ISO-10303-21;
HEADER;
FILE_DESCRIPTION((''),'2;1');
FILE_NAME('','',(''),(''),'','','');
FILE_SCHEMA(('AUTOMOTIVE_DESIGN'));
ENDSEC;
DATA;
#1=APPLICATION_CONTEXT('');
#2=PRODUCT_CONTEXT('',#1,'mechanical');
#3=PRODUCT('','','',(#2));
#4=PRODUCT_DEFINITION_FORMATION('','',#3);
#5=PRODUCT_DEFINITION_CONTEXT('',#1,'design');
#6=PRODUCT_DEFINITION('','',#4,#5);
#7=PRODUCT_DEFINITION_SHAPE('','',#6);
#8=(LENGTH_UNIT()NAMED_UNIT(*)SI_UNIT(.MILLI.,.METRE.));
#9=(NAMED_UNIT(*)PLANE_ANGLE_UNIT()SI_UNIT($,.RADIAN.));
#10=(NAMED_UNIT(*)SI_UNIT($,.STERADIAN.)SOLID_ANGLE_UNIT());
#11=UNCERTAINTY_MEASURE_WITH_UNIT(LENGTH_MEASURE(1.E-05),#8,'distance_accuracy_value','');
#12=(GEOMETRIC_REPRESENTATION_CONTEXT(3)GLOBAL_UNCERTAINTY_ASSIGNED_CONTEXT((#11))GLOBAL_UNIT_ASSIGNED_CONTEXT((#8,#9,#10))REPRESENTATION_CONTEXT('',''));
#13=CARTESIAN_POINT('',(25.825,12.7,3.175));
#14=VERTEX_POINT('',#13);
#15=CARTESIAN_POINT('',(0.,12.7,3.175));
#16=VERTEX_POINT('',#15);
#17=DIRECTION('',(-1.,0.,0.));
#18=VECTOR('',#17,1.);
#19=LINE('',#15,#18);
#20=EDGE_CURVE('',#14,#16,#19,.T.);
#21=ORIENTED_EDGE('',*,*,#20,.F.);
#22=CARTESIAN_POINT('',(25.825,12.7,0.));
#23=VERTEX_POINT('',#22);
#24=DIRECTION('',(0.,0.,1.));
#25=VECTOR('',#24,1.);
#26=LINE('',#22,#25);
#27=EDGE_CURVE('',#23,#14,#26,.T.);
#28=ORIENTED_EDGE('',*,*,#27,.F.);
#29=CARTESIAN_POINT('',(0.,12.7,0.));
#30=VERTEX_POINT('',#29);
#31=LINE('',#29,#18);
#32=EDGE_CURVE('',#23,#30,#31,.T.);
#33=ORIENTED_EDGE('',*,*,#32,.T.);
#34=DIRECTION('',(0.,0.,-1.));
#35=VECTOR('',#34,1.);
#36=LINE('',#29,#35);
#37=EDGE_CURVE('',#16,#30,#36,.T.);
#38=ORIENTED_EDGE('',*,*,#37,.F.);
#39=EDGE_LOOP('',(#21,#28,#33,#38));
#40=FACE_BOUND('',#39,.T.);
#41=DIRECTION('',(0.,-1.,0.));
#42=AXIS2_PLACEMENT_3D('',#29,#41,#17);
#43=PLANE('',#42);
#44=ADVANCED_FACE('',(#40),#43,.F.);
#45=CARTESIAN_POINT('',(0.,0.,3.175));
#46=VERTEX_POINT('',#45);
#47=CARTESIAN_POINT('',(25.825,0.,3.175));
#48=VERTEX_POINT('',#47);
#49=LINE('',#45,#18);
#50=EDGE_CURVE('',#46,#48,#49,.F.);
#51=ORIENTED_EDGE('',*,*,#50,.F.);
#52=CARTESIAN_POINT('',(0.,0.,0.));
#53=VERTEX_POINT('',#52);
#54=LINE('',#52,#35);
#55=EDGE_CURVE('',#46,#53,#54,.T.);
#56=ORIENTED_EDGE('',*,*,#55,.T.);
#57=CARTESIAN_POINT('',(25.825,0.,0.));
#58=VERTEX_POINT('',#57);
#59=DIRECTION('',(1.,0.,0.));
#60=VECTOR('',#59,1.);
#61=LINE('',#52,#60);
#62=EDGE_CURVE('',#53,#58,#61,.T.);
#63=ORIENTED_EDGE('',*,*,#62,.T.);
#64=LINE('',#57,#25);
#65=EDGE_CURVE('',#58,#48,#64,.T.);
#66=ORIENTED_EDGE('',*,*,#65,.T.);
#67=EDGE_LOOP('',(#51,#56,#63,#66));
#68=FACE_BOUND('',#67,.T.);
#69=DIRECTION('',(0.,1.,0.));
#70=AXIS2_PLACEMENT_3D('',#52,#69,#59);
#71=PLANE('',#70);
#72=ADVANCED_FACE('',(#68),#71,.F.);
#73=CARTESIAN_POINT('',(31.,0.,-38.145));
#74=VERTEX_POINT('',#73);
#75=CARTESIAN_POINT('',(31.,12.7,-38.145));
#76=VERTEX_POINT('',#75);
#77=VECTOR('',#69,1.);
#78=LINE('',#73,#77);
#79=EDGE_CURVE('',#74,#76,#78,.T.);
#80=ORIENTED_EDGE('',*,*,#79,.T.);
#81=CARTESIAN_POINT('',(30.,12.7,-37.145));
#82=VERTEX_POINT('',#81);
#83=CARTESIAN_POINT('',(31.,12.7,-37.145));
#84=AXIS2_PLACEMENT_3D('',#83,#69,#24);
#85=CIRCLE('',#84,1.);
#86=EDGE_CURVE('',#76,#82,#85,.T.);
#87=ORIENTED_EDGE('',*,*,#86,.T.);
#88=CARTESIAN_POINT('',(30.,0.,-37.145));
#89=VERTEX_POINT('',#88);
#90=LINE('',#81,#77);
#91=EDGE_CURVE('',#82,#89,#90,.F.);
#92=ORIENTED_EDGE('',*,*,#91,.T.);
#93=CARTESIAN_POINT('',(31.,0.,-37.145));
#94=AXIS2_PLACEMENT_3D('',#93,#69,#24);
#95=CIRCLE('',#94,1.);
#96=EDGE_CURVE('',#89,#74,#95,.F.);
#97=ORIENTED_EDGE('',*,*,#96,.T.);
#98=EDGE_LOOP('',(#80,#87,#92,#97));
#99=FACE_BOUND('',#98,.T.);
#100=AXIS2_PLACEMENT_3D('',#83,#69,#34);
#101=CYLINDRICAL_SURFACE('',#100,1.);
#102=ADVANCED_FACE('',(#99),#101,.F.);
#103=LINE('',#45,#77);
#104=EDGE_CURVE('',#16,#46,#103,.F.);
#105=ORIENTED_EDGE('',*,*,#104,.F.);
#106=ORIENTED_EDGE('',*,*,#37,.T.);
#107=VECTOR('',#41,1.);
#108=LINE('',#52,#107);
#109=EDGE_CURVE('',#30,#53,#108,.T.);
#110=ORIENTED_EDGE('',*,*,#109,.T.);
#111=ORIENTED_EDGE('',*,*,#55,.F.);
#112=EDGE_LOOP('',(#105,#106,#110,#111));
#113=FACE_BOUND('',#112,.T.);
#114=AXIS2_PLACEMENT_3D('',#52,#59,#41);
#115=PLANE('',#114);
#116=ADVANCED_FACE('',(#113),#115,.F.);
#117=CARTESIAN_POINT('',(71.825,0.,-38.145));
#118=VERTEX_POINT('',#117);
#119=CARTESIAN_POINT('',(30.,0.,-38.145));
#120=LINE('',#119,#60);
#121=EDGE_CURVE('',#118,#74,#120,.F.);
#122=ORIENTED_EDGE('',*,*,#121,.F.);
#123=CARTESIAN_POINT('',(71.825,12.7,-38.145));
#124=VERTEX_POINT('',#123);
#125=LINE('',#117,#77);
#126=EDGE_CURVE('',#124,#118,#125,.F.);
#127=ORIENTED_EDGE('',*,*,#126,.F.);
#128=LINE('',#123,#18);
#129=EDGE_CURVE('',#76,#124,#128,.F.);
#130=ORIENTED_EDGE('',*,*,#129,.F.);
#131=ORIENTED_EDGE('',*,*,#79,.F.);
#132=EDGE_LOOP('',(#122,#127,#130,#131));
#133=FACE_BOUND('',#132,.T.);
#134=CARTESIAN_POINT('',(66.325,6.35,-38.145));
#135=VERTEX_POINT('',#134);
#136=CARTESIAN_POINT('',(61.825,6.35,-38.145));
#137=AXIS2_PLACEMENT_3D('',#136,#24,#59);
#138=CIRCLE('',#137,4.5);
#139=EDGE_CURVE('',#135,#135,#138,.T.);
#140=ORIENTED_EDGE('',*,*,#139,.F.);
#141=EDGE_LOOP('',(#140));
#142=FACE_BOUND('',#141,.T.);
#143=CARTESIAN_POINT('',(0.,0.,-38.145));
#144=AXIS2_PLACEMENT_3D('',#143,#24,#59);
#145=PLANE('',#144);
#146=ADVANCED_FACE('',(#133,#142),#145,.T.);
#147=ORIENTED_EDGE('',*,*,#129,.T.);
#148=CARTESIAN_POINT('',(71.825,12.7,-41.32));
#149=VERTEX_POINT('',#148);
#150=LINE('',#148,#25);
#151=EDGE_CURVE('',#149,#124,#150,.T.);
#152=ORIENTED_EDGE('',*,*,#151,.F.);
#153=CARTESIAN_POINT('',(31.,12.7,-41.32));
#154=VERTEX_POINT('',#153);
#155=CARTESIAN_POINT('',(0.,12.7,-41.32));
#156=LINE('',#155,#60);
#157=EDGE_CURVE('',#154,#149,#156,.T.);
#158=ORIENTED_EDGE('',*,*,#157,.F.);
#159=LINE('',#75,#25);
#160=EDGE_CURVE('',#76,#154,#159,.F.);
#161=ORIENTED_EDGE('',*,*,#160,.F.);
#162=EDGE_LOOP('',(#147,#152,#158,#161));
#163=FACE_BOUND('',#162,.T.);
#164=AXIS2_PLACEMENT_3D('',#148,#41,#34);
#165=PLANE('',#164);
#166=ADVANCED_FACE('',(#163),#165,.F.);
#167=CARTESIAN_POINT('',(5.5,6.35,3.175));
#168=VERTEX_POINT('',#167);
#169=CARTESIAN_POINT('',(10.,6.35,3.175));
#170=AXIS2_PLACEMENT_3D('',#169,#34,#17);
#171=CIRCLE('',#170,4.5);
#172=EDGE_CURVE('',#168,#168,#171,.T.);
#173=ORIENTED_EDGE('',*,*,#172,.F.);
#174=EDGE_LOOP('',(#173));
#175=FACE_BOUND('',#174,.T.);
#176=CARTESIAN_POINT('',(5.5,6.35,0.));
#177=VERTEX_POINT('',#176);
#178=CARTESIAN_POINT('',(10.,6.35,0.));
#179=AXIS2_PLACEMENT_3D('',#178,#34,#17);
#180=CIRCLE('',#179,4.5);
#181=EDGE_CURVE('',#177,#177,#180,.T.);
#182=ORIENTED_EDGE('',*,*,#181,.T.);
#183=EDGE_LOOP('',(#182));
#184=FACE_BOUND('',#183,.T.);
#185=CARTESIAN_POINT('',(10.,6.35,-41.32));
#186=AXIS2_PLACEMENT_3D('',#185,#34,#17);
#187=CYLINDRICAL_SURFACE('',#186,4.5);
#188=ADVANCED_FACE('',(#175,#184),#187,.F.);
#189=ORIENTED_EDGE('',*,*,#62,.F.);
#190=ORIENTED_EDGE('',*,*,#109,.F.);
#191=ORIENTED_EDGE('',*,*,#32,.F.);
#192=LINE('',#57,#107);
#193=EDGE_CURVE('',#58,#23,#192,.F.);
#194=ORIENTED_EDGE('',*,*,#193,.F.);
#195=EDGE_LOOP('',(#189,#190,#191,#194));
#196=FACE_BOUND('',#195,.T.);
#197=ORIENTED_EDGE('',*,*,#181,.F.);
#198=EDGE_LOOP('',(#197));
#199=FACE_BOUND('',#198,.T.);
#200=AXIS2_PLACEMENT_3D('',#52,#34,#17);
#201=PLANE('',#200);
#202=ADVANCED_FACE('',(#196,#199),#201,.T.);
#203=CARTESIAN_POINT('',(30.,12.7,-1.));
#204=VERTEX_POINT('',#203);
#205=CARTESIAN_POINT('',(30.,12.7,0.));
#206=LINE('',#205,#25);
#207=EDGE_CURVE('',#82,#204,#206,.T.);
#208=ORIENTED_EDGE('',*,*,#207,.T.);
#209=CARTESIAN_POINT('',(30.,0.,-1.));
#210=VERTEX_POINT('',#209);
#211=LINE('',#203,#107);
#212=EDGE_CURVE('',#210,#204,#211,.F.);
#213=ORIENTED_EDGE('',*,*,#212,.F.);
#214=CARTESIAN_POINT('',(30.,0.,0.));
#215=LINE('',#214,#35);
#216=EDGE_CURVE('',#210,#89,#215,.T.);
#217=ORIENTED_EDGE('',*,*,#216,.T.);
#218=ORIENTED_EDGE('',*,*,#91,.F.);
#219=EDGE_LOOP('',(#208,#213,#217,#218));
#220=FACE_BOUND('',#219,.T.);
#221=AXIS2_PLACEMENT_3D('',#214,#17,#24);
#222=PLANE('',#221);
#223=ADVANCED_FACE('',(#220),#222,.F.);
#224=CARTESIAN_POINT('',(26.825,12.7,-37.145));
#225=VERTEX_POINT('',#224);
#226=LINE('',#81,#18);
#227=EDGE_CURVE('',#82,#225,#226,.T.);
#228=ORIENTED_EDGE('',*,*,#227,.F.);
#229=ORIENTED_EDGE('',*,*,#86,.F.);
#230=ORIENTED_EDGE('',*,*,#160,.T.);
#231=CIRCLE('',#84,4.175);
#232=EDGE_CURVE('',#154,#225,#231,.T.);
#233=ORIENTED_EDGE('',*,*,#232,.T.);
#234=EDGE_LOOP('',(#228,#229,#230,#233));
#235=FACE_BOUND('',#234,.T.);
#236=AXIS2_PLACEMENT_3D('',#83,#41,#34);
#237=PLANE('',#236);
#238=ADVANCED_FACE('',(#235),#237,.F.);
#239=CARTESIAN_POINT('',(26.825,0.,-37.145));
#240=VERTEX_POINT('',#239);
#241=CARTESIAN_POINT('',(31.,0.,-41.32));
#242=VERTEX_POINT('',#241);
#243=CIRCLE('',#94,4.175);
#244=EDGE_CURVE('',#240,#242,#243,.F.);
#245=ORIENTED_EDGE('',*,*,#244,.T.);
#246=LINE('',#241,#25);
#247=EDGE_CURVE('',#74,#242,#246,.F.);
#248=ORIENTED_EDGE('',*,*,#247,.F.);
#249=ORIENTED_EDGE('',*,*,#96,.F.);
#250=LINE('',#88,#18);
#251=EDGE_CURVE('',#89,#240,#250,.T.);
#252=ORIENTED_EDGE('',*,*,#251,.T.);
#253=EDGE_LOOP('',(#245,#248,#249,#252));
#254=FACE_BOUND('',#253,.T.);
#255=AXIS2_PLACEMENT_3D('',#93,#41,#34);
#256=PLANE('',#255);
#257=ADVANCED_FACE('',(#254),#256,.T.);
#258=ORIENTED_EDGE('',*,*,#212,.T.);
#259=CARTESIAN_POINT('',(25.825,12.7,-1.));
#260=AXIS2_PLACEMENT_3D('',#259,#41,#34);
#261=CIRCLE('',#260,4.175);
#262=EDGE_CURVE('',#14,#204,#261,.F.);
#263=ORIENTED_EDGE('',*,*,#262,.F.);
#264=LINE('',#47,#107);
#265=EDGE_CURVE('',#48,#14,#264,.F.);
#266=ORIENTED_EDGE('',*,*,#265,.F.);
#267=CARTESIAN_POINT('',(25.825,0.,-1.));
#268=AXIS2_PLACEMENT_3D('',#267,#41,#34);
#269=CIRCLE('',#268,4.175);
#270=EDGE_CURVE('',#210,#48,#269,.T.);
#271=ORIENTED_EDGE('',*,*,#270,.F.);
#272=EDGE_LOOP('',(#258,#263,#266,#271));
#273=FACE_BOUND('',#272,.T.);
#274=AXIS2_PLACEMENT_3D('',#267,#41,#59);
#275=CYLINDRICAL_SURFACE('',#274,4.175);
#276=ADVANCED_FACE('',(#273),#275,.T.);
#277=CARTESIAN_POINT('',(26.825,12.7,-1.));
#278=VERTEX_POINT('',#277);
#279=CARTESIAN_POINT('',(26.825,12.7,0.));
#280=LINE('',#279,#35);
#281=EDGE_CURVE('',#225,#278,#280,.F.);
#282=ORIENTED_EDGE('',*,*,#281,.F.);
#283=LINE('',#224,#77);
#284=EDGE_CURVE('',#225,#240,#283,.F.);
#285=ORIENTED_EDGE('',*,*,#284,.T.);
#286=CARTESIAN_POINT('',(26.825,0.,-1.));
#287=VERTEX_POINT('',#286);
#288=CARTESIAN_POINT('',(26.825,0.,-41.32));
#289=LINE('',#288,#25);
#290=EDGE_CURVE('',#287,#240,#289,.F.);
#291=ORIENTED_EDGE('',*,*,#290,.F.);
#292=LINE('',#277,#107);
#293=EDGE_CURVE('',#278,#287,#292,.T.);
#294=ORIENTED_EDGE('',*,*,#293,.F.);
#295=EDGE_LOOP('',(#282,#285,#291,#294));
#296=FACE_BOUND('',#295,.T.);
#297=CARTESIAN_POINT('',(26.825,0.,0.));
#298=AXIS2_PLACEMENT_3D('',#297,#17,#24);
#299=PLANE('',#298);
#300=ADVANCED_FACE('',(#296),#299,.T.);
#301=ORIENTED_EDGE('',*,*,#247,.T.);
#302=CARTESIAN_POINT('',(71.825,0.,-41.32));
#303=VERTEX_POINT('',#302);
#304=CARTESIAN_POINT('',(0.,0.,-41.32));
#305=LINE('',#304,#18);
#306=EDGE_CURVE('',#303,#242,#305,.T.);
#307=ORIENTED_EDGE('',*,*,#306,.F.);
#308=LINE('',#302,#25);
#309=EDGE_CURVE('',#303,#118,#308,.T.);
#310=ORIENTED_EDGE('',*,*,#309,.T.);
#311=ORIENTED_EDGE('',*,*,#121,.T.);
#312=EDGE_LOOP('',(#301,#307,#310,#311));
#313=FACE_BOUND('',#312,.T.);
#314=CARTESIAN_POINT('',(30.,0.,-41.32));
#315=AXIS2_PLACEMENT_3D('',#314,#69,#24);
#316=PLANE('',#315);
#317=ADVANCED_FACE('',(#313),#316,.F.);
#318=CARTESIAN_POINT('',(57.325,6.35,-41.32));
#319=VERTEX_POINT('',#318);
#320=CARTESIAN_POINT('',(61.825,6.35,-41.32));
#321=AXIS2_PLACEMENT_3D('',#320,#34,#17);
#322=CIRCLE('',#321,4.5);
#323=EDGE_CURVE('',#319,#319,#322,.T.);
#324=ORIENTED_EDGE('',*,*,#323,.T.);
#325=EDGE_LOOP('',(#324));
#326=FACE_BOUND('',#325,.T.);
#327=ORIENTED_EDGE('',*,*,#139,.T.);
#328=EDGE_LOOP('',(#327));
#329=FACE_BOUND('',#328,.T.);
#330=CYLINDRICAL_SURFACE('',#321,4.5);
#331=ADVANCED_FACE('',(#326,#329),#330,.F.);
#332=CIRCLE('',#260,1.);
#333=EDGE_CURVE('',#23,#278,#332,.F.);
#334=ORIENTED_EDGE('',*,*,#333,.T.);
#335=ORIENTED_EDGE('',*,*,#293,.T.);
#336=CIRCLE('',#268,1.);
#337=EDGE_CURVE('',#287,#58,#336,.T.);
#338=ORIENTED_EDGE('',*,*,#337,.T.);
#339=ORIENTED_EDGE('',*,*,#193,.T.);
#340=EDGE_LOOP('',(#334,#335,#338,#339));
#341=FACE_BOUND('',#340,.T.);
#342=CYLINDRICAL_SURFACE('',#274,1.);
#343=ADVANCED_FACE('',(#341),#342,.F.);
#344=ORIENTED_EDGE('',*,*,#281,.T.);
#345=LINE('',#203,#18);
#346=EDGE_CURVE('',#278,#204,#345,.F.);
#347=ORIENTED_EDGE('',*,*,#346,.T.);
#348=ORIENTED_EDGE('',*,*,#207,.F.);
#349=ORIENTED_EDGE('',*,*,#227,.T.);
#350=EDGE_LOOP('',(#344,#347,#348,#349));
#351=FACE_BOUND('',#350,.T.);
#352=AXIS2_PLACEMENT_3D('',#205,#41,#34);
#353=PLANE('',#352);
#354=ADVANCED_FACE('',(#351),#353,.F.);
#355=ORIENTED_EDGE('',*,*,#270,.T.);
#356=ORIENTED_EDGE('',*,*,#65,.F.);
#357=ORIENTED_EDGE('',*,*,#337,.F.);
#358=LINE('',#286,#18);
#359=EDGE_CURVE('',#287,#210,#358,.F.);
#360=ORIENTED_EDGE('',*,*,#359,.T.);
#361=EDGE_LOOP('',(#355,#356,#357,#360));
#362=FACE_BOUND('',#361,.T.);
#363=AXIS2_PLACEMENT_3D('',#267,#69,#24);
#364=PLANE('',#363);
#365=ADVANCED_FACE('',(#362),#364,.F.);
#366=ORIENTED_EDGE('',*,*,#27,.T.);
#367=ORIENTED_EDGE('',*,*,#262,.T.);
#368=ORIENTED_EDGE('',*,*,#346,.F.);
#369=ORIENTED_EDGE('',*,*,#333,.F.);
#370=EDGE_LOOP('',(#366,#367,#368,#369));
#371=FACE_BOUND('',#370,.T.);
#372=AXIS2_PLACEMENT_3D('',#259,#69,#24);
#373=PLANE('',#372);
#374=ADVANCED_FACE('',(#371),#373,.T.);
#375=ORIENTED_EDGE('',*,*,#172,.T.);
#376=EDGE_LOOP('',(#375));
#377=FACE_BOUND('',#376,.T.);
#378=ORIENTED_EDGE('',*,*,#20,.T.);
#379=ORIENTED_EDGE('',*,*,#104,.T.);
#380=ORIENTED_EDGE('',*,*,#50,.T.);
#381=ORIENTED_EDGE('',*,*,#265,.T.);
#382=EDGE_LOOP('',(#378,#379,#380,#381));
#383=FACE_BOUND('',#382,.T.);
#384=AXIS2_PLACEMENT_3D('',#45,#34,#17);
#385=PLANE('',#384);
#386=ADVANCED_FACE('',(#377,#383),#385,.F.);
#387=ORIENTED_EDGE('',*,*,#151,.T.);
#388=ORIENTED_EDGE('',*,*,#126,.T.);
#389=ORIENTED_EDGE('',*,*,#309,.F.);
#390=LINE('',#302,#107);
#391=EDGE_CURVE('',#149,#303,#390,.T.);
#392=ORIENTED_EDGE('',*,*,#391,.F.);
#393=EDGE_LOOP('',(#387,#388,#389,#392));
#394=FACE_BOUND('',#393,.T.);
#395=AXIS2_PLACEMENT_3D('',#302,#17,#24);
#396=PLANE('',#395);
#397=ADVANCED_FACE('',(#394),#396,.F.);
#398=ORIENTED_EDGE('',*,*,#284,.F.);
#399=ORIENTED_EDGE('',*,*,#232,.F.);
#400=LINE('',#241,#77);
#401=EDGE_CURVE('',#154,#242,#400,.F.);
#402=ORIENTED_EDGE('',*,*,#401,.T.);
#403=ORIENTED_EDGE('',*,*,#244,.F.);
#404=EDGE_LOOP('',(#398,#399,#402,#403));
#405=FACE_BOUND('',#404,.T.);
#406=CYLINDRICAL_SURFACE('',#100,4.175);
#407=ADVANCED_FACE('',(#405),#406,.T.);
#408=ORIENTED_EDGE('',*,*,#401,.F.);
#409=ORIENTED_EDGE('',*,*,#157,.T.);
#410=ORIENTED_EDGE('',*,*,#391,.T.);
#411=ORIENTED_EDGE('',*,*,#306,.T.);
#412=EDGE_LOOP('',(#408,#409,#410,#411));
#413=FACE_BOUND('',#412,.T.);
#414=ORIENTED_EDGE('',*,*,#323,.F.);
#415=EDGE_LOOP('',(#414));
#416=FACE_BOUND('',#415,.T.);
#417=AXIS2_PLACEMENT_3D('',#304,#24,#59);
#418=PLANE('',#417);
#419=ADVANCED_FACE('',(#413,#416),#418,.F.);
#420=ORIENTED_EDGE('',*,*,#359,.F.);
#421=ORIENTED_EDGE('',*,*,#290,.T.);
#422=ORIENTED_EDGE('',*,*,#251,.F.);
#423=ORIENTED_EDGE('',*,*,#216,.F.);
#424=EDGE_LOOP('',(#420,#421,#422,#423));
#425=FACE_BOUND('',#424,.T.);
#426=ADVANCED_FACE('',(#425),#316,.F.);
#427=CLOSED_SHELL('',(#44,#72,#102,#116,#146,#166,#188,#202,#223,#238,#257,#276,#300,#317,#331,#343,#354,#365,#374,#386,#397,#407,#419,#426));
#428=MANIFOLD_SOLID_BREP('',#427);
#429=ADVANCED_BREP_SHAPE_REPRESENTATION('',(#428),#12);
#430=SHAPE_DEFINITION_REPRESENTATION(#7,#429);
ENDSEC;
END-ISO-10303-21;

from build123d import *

# Parameters (mm, degrees)
SKETCH1_W                    = 30
SKETCH1_H                    = 12.7
BOSS_EXTRUDE1_DEPTH          = 3.175
EDGE_FLANGE1_STRIP_W         = 14.7
EDGE_FLANGE1_STRIP_H         = 3.175
EDGE_FLANGE1_STRIP_CUT_DEPTH = 12.7
EDGE_FLANGE1_DEPTH           = 12.7
EDGE_FLANGE2_STRIP_W         = 14.7
EDGE_FLANGE2_STRIP_H         = 3.175
EDGE_FLANGE2_STRIP_CUT_DEPTH = 12.7
EDGE_FLANGE2_DEPTH           = 12.7
M8_CLEARANCE_HOLE1_D         = 9


# Sheet-metal steps are written as plain solids
with BuildPart() as part:
    # Sketch1 → Boss-Extrude1 (new body)
    with BuildSketch(Plane.XY):
        with Locations((15, 6.35)):
            Rectangle(SKETCH1_W, SKETCH1_H)
    extrude(amount=BOSS_EXTRUDE1_DEPTH)

    # Edge-Flange1 strip (across the edge) → Edge-Flange1 strip cut (cut)
    with BuildSketch(Plane(origin=(30, 12.7, 0), x_dir=(-1, 0, 0), z_dir=(0, -1, 0))):
        with Locations((-3.175, -1.5875)):
            Rectangle(EDGE_FLANGE1_STRIP_W, EDGE_FLANGE1_STRIP_H)
    extrude(amount=EDGE_FLANGE1_STRIP_CUT_DEPTH, mode=Mode.SUBTRACT)

    # Edge-Flange1 section (across the edge) → Edge-Flange1 (add)
    with BuildSketch(Plane(origin=(30, 12.7, 0), x_dir=(-1, 0, 0), z_dir=(0, -1, 0))):
        with BuildLine():
            Line((0, 1), (0, 41.32))
            Line((0, 41.32), (3.175, 41.32))
            Line((3.175, 41.32), (3.175, 1))
            ThreePointArc((3.175, 1), (3.467893219, 0.292893219), (4.175, 0))
            Line((4.175, 0), (4.175, -3.175))
            ThreePointArc((4.175, -3.175), (1.222829189, -1.952170811), (0, 1))
        make_face()
    extrude(amount=EDGE_FLANGE1_DEPTH)

    # Edge-Flange2 strip (across the edge) → Edge-Flange2 strip cut (cut)
    with BuildSketch(Plane(origin=(30, 0, -41.32), x_dir=(0, 0, 1), z_dir=(0, 1, 0))):
        with Locations((-3.175, -1.5875)):
            Rectangle(EDGE_FLANGE2_STRIP_W, EDGE_FLANGE2_STRIP_H)
    extrude(amount=EDGE_FLANGE2_STRIP_CUT_DEPTH, mode=Mode.SUBTRACT)

    # Edge-Flange2 section (across the edge) → Edge-Flange2 (add)
    with BuildSketch(Plane(origin=(30, 0, -41.32), x_dir=(0, 0, 1), z_dir=(0, 1, 0))):
        with BuildLine():
            Line((0, 1), (0, 41.825))
            Line((0, 41.825), (3.175, 41.825))
            Line((3.175, 41.825), (3.175, 1))
            ThreePointArc((3.175, 1), (3.467893219, 0.292893219), (4.175, 0))
            Line((4.175, 0), (4.175, -3.175))
            ThreePointArc((4.175, -3.175), (1.222829189, -1.952170811), (0, 1))
        make_face()
    extrude(amount=EDGE_FLANGE2_DEPTH)

    # M8 Clearance Hole1 (through all)
    with Locations(Plane(origin=(0, 0, -41.32), x_dir=(-1, 0, 0), z_dir=(0, 0, -1))):
        with Locations((-61.825, 6.35), (-10, 6.35)):
            Hole(M8_CLEARANCE_HOLE1_D / 2)


solid = part.part
